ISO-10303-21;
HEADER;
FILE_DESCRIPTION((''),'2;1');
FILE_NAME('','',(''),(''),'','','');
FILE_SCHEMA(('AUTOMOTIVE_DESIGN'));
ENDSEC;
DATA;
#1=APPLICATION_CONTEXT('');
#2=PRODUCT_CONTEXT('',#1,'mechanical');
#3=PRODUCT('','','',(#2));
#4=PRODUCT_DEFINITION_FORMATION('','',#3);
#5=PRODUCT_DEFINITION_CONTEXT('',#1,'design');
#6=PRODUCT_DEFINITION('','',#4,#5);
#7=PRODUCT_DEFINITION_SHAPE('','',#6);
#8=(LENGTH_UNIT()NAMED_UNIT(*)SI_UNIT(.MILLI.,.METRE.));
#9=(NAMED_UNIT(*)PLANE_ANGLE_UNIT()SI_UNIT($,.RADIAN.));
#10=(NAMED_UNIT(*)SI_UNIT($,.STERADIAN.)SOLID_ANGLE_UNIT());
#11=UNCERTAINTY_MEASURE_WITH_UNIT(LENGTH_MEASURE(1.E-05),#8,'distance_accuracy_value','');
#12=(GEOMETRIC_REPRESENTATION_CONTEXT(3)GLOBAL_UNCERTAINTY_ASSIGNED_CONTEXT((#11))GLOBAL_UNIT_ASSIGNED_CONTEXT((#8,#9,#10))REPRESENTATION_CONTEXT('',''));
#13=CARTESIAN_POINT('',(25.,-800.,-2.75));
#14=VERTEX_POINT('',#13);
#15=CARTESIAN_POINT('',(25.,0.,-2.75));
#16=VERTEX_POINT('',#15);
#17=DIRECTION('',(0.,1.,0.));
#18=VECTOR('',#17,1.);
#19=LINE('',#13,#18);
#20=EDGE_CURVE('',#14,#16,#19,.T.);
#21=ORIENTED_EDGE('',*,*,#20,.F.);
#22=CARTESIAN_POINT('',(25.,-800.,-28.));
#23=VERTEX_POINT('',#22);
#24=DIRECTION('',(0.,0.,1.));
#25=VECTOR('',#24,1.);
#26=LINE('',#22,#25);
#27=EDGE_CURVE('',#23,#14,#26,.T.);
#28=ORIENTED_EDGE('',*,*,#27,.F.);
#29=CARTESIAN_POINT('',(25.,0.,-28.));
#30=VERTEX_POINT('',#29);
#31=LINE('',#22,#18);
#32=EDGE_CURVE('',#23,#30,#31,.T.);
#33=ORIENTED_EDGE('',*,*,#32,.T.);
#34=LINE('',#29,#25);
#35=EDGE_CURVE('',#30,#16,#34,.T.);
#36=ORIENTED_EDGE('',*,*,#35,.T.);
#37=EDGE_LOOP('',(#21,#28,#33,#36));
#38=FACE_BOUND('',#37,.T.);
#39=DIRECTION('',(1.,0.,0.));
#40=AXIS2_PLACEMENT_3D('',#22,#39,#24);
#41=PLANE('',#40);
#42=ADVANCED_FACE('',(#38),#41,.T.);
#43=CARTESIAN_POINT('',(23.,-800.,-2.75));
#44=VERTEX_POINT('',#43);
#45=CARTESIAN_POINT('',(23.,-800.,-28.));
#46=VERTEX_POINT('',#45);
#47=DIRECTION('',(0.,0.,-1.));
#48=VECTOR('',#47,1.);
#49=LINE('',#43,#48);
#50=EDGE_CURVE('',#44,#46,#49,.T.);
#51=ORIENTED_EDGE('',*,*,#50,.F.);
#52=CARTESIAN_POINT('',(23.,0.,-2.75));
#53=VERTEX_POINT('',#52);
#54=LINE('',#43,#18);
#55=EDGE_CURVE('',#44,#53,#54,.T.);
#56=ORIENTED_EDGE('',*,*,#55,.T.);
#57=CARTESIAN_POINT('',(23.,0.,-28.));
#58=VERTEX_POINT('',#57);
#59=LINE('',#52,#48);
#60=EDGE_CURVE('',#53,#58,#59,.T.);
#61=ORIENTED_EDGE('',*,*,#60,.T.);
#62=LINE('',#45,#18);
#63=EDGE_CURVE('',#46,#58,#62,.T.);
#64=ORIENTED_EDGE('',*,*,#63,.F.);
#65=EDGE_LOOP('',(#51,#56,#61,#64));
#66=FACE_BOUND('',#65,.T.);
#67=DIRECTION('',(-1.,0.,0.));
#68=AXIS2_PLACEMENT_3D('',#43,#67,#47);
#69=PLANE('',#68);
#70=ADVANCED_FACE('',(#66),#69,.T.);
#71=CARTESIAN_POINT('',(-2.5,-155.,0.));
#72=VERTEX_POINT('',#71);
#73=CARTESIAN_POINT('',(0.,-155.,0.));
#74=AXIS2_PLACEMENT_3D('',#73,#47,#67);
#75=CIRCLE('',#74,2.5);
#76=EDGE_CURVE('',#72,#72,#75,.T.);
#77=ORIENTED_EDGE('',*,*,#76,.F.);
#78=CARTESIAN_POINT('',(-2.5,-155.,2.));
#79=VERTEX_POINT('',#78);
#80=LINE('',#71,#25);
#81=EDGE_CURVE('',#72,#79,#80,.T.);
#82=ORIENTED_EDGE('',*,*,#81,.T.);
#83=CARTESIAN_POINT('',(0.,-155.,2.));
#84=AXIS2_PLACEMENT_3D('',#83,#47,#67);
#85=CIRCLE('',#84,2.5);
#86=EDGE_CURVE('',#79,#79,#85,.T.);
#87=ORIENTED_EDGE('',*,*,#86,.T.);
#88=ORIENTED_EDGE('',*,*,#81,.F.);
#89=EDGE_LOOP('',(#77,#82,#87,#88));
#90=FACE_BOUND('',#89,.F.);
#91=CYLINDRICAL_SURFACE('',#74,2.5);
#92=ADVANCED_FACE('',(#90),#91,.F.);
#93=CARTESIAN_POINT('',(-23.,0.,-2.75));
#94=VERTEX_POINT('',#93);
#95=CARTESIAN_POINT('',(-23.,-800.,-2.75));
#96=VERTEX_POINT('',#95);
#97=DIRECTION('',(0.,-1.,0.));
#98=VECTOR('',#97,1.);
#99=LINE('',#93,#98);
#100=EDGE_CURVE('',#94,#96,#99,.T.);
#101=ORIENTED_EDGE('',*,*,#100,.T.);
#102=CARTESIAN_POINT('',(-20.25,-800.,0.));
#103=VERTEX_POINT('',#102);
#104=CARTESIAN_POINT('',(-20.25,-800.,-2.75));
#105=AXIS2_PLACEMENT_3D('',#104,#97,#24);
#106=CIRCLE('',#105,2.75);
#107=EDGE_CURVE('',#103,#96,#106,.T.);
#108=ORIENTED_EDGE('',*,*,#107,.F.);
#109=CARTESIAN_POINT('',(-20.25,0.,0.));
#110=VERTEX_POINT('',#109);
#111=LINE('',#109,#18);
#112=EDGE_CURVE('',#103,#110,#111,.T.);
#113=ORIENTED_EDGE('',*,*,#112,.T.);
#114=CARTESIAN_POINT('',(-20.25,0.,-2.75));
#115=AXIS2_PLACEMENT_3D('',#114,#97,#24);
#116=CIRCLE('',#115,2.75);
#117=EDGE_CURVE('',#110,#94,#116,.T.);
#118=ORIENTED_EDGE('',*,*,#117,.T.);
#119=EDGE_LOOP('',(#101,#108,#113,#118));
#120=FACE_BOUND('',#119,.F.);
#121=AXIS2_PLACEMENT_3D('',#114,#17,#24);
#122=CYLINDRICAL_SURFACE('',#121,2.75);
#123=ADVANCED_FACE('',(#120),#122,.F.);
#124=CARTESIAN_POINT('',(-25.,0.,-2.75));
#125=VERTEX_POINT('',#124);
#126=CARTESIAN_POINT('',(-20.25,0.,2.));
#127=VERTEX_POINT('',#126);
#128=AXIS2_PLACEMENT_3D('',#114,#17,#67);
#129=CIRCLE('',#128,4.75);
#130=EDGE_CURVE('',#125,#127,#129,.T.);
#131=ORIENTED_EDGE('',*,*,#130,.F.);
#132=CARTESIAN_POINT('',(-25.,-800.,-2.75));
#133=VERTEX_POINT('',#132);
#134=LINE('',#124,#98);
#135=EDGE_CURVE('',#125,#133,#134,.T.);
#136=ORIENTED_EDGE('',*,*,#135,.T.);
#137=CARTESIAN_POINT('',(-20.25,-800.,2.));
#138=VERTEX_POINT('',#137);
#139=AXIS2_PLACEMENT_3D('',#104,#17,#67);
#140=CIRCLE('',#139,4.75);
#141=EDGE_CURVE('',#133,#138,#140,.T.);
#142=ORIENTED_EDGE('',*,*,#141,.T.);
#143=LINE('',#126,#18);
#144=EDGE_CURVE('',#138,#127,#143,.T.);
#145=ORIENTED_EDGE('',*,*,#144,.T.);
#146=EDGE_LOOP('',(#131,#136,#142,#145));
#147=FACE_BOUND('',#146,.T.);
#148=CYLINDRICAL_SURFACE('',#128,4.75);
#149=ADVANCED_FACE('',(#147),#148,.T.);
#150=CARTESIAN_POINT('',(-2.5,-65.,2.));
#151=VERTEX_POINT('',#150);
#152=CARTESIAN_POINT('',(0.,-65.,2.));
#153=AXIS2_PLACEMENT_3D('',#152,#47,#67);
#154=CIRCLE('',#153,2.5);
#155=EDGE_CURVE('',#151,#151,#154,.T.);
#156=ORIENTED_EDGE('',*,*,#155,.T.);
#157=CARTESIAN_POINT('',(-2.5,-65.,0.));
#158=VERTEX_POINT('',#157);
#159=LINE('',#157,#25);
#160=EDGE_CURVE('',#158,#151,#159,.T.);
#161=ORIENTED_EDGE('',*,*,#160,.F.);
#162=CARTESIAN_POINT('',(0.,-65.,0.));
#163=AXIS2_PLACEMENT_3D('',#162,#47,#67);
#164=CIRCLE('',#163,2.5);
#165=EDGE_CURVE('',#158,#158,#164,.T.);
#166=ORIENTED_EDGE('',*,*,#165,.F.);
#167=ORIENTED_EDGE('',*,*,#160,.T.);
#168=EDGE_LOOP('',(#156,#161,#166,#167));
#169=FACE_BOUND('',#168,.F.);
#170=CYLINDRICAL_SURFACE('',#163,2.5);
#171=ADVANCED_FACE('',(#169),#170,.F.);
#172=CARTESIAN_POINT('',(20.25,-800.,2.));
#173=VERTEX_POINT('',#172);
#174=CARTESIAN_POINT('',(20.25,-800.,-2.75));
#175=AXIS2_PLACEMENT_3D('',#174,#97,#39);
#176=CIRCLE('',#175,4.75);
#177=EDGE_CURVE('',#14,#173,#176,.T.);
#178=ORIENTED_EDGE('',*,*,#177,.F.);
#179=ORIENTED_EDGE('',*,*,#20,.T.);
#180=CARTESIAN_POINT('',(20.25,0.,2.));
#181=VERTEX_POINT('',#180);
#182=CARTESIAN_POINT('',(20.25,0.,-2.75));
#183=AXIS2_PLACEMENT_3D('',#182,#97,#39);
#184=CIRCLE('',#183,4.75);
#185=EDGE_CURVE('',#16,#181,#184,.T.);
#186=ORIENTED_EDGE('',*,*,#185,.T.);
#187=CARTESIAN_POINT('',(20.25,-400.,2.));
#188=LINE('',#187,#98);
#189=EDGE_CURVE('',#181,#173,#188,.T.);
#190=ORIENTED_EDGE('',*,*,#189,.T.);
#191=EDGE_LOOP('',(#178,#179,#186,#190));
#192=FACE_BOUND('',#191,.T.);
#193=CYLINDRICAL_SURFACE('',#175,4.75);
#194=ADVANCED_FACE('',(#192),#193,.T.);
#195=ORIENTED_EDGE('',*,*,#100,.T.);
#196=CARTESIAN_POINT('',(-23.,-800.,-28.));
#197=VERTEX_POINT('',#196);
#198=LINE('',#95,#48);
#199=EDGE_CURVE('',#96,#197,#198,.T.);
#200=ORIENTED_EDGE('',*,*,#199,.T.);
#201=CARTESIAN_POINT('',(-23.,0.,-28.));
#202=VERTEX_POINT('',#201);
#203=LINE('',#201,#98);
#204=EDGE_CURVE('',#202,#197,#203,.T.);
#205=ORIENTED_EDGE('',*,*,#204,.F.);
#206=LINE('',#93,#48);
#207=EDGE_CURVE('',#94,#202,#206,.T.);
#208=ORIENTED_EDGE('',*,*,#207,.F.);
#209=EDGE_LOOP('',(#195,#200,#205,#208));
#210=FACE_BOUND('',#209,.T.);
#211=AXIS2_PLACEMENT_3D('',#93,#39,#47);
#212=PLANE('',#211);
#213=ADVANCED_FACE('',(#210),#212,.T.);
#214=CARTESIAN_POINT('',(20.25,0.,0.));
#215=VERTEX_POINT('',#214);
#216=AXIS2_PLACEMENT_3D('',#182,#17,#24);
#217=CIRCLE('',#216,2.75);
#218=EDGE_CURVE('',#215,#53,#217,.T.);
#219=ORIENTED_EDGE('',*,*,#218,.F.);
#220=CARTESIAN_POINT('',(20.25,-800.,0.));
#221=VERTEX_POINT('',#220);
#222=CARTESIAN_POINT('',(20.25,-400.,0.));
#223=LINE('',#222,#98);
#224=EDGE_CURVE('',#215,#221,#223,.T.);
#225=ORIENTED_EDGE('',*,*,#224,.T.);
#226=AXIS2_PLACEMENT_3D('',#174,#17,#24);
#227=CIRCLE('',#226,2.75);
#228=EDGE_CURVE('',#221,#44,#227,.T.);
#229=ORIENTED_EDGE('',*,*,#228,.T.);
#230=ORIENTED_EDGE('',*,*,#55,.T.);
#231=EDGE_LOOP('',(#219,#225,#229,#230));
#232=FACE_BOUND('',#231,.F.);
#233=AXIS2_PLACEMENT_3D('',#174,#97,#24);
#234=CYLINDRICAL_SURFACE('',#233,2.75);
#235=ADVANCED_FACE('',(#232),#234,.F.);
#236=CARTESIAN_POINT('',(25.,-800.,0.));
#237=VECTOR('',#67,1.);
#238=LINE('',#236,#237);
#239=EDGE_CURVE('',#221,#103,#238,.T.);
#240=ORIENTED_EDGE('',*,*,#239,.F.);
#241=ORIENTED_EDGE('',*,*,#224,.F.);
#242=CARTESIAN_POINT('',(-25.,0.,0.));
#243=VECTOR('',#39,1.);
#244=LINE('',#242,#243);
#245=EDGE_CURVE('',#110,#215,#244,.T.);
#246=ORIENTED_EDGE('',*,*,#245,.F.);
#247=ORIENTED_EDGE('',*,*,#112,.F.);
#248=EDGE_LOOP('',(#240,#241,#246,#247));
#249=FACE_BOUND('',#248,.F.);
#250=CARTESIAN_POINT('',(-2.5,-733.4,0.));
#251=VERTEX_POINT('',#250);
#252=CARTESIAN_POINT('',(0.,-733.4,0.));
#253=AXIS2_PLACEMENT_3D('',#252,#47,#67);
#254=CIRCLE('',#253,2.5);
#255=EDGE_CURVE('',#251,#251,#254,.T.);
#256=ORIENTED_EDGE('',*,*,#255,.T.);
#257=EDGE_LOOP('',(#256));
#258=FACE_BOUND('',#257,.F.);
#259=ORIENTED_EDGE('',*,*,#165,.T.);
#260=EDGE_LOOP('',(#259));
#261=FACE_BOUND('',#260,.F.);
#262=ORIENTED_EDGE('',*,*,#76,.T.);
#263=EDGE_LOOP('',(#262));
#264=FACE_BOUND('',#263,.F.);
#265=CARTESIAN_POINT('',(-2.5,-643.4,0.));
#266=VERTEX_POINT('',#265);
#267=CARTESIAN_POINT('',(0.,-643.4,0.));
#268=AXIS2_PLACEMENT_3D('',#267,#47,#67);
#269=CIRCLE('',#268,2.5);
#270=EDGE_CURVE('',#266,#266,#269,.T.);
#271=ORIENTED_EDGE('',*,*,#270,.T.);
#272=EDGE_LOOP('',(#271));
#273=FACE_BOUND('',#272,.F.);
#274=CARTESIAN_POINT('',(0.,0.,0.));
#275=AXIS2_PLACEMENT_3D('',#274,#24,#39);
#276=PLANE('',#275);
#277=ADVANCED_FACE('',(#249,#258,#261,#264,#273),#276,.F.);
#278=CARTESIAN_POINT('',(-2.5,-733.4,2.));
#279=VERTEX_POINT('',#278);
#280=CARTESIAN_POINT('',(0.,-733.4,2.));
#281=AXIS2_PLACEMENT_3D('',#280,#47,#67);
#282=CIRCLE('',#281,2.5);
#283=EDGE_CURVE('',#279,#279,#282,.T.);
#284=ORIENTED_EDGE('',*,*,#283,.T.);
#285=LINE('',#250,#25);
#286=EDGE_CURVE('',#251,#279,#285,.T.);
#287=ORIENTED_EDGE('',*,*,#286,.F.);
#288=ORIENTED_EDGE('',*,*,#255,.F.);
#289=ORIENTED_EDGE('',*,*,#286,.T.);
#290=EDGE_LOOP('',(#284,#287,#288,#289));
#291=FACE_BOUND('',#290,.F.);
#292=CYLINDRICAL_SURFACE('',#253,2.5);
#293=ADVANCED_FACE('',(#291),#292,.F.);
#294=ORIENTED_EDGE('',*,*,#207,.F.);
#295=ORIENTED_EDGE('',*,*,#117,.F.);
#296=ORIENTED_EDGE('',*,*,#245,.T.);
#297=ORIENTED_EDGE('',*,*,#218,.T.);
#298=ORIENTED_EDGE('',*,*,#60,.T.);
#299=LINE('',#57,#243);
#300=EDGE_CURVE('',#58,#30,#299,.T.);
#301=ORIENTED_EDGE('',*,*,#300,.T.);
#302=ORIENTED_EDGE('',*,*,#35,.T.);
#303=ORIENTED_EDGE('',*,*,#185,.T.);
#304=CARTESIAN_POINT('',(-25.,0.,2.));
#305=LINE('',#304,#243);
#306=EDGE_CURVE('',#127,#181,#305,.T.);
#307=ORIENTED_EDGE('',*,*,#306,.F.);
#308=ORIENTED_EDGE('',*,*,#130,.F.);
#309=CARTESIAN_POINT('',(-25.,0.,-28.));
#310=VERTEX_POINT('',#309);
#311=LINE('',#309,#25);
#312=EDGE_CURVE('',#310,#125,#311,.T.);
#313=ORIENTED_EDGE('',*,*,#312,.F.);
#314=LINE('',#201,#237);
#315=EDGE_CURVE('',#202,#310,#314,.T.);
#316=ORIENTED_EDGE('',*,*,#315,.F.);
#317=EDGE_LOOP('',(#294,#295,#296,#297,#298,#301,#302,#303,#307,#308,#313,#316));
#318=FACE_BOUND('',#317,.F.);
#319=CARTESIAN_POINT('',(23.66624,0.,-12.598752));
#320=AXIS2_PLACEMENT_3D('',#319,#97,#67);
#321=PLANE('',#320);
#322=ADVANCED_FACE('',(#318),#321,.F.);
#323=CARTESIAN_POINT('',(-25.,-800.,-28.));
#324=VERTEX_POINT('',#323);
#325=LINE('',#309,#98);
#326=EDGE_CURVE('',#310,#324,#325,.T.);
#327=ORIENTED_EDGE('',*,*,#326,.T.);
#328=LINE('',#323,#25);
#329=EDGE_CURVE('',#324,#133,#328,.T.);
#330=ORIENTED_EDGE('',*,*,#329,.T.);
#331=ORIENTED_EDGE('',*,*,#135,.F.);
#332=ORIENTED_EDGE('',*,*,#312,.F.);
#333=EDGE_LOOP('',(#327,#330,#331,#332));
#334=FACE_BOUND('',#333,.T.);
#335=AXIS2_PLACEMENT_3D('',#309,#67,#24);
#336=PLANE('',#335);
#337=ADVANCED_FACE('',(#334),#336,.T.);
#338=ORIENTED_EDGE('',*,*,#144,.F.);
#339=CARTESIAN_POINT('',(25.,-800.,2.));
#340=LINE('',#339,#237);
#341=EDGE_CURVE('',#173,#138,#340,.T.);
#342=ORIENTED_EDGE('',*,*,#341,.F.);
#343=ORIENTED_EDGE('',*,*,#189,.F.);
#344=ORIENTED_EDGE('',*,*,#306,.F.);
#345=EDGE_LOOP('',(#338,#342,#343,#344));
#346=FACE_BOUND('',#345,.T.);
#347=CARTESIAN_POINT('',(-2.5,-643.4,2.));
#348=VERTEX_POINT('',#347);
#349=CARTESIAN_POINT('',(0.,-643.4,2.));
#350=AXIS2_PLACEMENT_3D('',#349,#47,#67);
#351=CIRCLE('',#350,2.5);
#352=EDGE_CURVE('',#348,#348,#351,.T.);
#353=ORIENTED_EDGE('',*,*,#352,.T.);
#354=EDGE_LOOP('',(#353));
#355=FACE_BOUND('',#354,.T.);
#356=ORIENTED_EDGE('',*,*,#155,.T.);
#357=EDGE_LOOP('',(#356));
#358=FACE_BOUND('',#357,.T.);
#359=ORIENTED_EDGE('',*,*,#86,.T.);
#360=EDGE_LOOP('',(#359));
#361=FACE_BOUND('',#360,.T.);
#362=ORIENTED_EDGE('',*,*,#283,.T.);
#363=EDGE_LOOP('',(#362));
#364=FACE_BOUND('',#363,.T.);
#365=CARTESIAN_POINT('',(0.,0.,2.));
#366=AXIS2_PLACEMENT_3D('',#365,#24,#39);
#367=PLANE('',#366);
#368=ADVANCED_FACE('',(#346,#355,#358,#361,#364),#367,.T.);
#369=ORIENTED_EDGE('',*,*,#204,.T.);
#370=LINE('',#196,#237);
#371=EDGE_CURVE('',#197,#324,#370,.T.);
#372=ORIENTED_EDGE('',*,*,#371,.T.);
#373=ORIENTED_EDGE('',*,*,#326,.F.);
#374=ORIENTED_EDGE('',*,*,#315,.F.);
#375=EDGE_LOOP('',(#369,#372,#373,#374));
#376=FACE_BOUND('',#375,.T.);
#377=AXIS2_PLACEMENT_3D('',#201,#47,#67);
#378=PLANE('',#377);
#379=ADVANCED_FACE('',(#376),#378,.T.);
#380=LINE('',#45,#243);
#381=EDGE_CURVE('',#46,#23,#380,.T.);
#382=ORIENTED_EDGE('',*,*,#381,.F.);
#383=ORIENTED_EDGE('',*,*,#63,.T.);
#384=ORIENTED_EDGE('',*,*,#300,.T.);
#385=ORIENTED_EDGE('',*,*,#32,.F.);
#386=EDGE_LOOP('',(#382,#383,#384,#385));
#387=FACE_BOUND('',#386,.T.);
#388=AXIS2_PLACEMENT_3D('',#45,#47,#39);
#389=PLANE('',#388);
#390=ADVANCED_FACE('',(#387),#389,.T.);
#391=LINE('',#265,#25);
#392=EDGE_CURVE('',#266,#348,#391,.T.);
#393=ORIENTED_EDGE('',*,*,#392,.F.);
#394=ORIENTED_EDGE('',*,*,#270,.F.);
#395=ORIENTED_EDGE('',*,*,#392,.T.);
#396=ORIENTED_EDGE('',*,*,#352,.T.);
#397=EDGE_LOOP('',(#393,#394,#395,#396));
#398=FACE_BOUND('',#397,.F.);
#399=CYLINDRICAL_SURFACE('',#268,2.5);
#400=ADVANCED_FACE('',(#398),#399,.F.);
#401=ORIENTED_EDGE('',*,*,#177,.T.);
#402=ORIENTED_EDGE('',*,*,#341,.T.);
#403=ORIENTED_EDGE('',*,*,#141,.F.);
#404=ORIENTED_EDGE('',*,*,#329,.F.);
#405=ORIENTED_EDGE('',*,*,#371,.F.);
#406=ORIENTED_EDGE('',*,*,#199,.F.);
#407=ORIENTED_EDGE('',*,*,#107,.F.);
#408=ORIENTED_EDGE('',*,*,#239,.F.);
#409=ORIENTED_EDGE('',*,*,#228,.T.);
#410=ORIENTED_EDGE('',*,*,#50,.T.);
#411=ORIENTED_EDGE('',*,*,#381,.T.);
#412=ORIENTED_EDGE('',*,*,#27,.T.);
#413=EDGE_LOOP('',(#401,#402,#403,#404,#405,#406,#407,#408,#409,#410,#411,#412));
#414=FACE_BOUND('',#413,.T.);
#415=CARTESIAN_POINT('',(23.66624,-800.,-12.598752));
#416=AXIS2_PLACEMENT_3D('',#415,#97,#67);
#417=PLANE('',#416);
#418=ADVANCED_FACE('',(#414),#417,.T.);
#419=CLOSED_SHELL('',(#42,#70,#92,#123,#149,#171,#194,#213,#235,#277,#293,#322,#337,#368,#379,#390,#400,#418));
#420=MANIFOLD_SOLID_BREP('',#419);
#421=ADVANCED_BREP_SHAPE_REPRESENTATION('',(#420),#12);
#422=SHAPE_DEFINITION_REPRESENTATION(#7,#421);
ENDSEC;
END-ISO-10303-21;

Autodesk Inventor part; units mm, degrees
ref_plane "YZ Plane" through (0, 0, 0) normal (1, 0, 0) x (0, 1, 0)
ref_plane "XZ Plane" through (0, 0, 0) normal (0, 1, 0) x (-1, 0, 0)
ref_plane "XY Plane" through (0, 0, 0) normal (0, 0, 1) x (1, 0, 0)
sketch "Sketch1" plane through (0, 0, 0) normal (0, 0, 1) x (1, 0, 0)
  line L0 (-25, 0) -> (25, 0)
  line L1 (25, 0) -> (25, -800)
  line L2 (25, -800) -> (-25, -800)
  line L3 (-25, -800) -> (-25, 0)
  point P0 (0, 0)
  point P1 (0, 0)
  dimension "d0" = 50
  dimension "d1" = 800
extrude "Plate1" add sketch "Sketch1" along normal blind 2
sketch "Sketch2" plane through (23, -800, 2) normal (1, 0, 0) x (0, 1, 0)
  line L0 (800, 0) -> (0, 0)
  line L1 (0, 0) -> (0, -30)
  line L2 (0, -30) -> (800, -30)
  line L3 (800, -30) -> (800, 0)
edge flange "Flange1" height 30 angle 90 thickness 2 bend radius 2.75 thickness toward (1, 0, 0) relief tear relief width 2 relief depth 1 corner gap 2 corner form 0 edges at (25, -400, 0) (-25, -400, 0) wall of the first edge with corners at (23, 0, 2) (23, -800, 2) (23, -800, -28) (23, 0, -28)
bend "Bend1"
corner "Corner1"
sketch "Sketch3" plane through (0, 0, 0) normal (1, 0, 0) x (0, 1, 0)
  line L0 (0, -2.75) -> (-800, -2.75) projected
  line L1 (-800, -28) -> (-800, -2.75) projected
  line L2 (0, -28) -> (-800, -28) projected
  line L3 (0, -2.75) -> (0, -28) projected
  line L4 (-790, -28) -> (-770, -28)
  line L5 (-770, -28) -> (-770, -18)
  line L6 (-770, -18) -> (-790, -18)
  line L7 (-790, -18) -> (-790, -28)
  point P0 (0, 0)
  point P1 (-770, -28)
  point P2 (-790, -23)
  dimension "d13" = 20
  dimension "d14" = 10
  dimension "d17" = 10
extrude "Extrusion1" [suppressed]
sketch "Sketch4" plane through (0, 0, 0) normal (0, 0, -1) x (-1, 0, 0)
  circle A0 centre (0, -733.4) radius 2.5
  circle A1 centre (0, -643.4) radius 2.5
  circle A2 centre (0, -155) radius 2.5
  circle A3 centre (0, -65) radius 2.5
  line L0 (20.25, 0) -> (-20.25, 0) projected
  line L1 (-20.25, 0) -> (20.25, 0) projected
  point P0 (0, 0)
  point P1 (0, 0)
  point P2 (0, 0)
  dimension "d18" = 5
  dimension "d19" = 90
  dimension "d20" = 90
  dimension "d21" = 488.4
  dimension "d22" = 65
extrude "Cut1" cut sketch "Sketch4" against normal blind 2
equation "\"d23\" = Thickness"
equation "\"d2\" = Thickness"
equation "\"d3\" = BendReliefWidth"
equation "\"d4\" = BendReliefDepth"
equation "\"d5\" = MinimumRemnant"
equation "\"d6\" = TransitionRadius"
equation "\"d10\" = CornerReliefSize"
equation "\"d11\" = GapSize"
equation "\"d12\" = JacobiRadiusSize"
equation "\"BendRadius\" = Thickness"
equation "\"BendReliefWidth\" = Thickness"
equation "\"BendReliefDepth\" = 0.5 * Thickness"
equation "\"CornerReliefSize\" = 4 * Thickness"
equation "\"MinimumRemnant\" = 2 * Thickness"
equation "\"TransitionRadius\" = BendRadius"
equation "\"JacobiRadiusSize\" = BendRadius"
equation "\"GapSize\" = Thickness"
equation "\"Thickness\" = 2"
properties part number "ДМФ 053 швеллер лотка v2.0_CPY"
